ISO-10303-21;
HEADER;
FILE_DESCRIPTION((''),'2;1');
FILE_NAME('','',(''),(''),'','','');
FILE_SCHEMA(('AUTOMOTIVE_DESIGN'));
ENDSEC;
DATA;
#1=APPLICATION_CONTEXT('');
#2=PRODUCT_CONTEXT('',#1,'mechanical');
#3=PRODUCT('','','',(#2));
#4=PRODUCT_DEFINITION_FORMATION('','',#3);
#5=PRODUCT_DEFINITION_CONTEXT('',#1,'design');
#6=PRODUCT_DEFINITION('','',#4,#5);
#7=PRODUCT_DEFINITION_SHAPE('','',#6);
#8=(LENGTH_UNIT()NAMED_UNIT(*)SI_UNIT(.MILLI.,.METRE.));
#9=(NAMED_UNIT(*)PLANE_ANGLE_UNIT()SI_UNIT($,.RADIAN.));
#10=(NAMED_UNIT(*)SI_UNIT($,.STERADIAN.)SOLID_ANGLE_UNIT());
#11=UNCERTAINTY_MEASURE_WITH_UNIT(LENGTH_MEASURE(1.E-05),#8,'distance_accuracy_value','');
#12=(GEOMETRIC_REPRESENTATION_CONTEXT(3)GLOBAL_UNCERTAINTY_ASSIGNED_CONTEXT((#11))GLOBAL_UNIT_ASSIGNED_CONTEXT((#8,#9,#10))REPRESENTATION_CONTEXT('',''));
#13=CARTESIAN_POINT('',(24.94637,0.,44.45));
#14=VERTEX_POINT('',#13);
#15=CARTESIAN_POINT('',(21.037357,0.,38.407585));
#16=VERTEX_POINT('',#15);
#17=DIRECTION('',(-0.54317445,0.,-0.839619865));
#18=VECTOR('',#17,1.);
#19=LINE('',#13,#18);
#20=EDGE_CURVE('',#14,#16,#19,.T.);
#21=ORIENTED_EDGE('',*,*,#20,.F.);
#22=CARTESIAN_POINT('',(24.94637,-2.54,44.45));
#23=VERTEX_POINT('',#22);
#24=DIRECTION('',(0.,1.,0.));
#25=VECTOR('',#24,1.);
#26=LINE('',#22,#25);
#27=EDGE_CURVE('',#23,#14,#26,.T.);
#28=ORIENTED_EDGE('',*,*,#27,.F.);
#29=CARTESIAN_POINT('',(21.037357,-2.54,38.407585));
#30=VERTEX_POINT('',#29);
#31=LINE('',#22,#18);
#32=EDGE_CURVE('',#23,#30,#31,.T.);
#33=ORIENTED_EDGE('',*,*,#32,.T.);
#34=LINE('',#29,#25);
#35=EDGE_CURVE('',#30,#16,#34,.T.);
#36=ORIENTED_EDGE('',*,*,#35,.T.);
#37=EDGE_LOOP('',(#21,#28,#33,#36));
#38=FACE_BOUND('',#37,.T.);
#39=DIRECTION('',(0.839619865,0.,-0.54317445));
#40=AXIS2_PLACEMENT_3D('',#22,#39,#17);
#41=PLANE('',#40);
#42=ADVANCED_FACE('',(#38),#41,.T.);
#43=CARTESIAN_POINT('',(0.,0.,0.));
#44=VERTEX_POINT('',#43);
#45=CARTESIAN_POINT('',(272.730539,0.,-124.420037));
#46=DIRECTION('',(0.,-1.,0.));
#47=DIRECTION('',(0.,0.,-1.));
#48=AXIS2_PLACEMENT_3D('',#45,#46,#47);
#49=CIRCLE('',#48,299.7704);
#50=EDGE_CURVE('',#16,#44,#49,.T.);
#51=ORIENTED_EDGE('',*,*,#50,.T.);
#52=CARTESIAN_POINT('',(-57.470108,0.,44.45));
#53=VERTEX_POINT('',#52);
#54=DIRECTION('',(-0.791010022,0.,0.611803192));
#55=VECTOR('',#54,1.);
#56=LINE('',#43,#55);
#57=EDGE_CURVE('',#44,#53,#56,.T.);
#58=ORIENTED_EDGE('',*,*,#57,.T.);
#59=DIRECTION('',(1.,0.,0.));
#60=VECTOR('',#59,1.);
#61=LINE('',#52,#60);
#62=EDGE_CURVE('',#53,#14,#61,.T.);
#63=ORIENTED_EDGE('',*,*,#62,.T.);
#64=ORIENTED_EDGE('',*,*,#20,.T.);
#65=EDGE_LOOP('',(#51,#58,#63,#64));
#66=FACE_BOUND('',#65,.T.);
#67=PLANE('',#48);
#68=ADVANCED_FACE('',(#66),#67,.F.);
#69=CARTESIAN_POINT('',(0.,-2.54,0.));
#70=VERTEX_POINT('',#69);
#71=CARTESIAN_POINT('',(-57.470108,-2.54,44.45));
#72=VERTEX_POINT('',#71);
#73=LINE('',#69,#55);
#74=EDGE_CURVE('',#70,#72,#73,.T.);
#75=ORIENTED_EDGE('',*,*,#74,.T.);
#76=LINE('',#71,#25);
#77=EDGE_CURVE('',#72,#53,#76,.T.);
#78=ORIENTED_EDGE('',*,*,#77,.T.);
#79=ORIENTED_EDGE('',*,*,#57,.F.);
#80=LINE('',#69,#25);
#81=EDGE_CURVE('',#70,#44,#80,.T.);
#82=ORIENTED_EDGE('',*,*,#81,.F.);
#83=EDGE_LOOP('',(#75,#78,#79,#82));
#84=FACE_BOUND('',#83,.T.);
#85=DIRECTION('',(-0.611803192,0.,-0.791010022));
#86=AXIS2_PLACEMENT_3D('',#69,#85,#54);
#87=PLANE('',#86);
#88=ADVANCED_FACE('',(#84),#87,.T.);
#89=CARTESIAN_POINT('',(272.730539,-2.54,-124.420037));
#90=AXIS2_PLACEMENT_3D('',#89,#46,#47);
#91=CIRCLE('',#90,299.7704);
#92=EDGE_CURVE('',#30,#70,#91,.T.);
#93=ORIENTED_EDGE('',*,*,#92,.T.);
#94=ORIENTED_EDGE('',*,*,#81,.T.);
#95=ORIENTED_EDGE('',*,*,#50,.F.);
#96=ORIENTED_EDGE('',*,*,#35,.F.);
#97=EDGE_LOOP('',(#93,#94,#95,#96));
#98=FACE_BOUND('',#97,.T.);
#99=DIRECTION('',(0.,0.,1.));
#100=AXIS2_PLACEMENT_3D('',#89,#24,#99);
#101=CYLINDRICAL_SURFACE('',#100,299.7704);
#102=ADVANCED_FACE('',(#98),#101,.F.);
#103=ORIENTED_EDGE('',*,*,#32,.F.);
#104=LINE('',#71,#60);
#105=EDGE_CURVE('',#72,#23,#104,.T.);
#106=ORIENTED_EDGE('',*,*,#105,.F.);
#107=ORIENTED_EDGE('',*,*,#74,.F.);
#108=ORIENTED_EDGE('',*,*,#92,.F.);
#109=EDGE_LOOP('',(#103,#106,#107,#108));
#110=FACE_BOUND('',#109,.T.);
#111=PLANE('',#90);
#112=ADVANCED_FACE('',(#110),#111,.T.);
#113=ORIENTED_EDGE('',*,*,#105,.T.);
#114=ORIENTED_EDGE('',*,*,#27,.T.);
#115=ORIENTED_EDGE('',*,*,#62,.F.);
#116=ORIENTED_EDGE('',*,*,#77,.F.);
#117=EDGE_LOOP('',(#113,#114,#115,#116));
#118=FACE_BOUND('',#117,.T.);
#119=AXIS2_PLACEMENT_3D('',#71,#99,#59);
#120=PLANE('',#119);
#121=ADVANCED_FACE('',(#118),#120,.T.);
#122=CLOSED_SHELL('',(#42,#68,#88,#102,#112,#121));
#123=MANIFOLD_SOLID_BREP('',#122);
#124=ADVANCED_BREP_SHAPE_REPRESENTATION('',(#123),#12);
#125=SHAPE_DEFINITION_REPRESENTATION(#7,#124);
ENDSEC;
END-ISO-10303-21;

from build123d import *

# Parameters (mm, degrees)
BASE_FLANGE1_DEPTH = 2.54


# Sheet-metal steps are written as plain solids
with BuildPart() as part:
    # Sketch1 → Base-Flange1 (new body)
    with BuildSketch(Plane(origin=(0, 0, 0), x_dir=(1, 0, 0), z_dir=(0, 1, 0))):
        with BuildLine():
            Line((0, 0), (-57.470107897, -44.45))
            Line((-57.470107897, -44.45), (24.946370193, -44.45))
            Line((24.946370193, -44.45), (21.037356808, -38.407585285))
            ThreePointArc((21.037356808, -38.407585285), (9.816398094, -19.588459404), (0, 0))
        make_face()
    extrude(amount=-BASE_FLANGE1_DEPTH)


solid = part.part
